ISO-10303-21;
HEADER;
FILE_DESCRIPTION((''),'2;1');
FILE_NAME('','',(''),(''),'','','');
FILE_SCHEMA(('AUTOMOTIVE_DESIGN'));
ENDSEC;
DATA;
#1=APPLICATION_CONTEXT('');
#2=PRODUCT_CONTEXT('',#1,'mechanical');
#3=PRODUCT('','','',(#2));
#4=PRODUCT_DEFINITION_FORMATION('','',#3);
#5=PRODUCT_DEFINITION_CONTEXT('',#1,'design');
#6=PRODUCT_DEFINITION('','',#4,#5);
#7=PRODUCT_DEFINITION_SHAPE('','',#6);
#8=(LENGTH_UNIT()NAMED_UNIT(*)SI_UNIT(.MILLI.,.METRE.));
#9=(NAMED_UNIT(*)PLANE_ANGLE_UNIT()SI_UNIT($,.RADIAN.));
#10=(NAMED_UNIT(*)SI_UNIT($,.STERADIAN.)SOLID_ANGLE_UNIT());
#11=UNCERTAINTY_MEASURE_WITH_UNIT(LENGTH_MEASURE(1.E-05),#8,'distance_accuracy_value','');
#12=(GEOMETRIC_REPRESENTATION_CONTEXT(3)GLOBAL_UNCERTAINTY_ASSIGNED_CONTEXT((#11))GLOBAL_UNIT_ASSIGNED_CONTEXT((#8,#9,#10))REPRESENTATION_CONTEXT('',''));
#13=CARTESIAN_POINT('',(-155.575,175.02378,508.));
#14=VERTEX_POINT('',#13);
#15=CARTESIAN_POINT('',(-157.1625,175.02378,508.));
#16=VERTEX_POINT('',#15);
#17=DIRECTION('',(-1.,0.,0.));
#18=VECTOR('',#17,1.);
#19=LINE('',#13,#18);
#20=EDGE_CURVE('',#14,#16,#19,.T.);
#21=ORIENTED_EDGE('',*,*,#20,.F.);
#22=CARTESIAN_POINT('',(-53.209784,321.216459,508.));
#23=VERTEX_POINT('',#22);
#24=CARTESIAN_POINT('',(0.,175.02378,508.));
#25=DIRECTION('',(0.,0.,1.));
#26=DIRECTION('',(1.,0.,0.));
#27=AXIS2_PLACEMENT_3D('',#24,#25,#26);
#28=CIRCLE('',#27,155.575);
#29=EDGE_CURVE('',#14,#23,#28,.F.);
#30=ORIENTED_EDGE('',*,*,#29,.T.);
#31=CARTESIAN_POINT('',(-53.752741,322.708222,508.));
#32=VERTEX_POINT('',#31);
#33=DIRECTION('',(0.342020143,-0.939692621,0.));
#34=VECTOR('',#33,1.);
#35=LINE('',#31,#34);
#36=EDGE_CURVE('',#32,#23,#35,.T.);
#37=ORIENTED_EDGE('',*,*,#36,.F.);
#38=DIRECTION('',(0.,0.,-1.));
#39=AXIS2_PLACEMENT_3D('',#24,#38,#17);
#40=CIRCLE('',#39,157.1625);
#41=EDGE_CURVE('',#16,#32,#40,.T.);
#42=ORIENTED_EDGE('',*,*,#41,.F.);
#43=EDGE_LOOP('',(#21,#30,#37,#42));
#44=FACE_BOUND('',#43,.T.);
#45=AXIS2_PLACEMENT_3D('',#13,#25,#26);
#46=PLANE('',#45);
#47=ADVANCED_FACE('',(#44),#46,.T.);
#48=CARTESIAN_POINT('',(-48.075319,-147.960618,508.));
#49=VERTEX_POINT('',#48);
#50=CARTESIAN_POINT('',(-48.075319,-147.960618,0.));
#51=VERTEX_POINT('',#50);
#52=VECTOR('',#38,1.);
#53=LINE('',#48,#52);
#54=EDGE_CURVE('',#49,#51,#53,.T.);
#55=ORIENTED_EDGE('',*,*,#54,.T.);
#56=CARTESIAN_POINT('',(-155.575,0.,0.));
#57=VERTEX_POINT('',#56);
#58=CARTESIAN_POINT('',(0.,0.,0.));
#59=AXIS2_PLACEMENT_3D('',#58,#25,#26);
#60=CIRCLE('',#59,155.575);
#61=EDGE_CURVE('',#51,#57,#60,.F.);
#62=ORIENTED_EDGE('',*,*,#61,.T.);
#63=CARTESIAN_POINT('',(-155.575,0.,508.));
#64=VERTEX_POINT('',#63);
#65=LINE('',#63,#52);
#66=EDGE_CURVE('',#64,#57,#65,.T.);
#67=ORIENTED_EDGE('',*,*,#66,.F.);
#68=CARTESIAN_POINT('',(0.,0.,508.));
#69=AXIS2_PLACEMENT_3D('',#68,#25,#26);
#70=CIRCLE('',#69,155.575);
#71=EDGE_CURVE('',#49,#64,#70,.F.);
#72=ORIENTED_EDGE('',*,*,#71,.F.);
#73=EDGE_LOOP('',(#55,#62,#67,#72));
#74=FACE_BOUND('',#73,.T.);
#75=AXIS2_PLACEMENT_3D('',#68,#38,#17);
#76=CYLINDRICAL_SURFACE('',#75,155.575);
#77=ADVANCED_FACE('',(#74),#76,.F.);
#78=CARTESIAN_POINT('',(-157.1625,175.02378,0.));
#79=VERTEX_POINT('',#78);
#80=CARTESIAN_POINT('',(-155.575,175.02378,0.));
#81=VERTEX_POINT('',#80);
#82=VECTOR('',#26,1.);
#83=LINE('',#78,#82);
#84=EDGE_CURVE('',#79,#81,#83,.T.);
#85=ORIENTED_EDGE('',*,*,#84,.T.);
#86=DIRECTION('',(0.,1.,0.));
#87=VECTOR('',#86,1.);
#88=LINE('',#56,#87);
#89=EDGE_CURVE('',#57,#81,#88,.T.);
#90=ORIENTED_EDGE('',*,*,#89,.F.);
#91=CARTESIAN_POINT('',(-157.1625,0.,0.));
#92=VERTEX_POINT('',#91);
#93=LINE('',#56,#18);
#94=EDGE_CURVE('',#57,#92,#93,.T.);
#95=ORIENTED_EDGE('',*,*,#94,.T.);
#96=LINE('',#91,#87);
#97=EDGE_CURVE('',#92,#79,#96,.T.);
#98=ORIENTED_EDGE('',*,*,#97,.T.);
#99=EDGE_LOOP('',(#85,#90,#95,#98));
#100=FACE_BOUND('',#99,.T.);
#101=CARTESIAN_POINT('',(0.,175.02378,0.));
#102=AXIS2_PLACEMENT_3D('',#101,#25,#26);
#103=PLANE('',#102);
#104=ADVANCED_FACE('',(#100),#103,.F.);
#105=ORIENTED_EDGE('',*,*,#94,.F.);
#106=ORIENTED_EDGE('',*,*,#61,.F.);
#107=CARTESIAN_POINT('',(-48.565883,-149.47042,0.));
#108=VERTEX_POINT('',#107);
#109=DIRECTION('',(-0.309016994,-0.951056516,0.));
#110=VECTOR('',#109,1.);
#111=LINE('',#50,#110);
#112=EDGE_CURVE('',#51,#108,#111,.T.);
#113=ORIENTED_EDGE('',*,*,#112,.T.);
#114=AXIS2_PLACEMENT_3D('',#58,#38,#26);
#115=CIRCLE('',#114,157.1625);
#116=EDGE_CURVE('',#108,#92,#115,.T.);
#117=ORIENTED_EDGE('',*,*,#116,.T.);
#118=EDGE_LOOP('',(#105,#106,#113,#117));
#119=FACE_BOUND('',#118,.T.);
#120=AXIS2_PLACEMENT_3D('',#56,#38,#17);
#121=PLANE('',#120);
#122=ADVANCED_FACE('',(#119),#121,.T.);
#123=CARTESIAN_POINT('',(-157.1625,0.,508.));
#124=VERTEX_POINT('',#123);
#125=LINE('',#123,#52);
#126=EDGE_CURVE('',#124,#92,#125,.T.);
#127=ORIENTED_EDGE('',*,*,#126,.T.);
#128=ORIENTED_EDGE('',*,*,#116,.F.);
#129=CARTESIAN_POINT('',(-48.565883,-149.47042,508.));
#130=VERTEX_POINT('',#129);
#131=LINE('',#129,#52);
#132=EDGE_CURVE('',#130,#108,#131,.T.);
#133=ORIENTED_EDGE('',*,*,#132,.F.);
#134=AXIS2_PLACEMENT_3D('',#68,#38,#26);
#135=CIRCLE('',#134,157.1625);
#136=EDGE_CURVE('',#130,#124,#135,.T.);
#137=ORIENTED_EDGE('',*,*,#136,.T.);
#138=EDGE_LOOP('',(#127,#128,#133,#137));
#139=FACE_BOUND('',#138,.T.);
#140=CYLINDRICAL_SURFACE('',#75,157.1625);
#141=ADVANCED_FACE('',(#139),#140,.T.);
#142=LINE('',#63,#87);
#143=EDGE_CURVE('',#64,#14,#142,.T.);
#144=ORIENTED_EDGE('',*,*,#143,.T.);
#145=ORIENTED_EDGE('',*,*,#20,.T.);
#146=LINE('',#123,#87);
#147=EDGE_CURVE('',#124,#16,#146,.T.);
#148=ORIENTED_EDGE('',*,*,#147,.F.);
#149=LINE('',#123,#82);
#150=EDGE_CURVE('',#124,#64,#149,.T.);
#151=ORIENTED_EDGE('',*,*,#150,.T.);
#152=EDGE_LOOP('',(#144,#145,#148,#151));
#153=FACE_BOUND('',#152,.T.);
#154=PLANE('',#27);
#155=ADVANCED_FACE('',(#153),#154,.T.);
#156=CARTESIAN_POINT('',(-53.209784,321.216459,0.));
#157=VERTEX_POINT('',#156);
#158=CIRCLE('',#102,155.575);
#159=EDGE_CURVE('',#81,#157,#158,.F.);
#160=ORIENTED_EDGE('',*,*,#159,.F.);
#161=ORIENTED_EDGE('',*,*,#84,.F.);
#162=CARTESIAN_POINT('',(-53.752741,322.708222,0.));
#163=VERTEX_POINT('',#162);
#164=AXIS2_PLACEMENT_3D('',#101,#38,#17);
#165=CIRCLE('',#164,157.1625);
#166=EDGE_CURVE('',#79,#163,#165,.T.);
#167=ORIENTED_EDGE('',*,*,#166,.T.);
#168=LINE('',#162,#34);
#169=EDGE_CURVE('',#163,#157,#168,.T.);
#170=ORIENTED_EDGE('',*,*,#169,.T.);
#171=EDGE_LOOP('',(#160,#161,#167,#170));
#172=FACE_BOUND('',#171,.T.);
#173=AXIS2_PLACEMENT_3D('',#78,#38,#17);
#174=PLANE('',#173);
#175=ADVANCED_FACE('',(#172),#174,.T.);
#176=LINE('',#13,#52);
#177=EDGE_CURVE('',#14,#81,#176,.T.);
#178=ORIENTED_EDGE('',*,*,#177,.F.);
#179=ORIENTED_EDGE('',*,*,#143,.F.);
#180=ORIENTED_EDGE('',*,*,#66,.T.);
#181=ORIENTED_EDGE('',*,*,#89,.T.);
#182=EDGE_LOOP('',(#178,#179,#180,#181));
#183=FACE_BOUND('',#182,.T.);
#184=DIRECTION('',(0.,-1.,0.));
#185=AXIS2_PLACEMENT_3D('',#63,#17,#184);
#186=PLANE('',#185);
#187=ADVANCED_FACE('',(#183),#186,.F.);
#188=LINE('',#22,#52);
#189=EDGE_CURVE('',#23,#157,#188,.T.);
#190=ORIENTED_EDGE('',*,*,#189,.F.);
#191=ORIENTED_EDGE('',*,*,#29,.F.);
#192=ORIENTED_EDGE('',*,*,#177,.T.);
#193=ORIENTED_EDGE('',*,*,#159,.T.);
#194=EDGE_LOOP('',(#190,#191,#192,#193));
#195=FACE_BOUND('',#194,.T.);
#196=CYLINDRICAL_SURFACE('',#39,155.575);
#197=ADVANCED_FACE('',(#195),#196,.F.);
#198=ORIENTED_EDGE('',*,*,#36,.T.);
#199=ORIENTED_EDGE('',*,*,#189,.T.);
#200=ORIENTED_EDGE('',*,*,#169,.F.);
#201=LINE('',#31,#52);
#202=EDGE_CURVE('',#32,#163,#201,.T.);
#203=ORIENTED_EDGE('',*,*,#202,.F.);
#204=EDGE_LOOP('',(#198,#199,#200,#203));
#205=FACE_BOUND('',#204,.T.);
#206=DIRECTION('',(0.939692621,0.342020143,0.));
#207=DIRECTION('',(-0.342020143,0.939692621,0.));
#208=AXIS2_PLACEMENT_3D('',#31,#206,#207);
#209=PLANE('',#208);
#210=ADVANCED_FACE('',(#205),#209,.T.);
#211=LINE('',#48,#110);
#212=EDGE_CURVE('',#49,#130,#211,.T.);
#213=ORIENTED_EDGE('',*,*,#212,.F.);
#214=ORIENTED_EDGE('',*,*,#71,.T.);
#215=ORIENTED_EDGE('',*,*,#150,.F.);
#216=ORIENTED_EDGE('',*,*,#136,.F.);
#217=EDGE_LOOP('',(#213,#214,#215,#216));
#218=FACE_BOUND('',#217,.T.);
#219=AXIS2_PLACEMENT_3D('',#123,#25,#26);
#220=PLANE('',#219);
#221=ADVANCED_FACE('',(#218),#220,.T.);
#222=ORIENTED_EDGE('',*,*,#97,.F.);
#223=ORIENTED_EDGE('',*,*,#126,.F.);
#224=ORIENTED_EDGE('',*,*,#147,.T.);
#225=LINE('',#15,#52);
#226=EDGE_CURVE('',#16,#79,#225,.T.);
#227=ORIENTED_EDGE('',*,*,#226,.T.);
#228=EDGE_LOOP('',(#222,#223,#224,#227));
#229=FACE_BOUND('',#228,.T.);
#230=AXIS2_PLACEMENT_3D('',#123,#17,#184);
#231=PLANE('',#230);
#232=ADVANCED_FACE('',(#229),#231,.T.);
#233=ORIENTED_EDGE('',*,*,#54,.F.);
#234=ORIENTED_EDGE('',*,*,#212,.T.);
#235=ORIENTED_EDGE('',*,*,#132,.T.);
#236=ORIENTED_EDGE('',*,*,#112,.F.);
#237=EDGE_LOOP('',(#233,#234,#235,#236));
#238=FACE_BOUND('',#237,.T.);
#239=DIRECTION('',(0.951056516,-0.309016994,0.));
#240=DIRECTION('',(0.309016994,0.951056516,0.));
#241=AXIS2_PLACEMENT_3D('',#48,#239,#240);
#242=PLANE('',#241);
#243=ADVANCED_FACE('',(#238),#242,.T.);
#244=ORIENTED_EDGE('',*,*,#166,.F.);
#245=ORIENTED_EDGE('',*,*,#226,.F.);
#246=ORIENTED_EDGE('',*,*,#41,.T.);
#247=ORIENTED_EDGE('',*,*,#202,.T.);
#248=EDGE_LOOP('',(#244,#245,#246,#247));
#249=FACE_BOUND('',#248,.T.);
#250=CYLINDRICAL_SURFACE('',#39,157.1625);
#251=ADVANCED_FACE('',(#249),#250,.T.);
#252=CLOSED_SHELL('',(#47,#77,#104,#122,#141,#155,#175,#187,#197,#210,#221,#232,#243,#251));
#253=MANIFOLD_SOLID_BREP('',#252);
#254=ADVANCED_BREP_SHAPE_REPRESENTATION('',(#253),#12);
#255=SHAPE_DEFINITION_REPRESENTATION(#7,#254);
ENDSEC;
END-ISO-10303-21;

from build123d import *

# Parameters (mm, degrees)
BASE_FLANGE1_DEPTH = 508


# Sheet-metal steps are written as plain solids
with BuildPart() as part:
    # Sketch1 → Base-Flange1 (new body)
    with BuildSketch(Plane.XY):
        with BuildLine():
            ThreePointArc((-48.565883378, -149.470419742), (-127.147133378, -92.377799713), (-157.1625, 0))
            Line((-157.1625, 0), (-157.1625, 175.02378))
            ThreePointArc((-157.1625, 175.02378), (-128.739983161, 265.168486678), (-53.752740775, 322.708221514))
            Line((-53.752740775, 322.708221514), (-53.209783798, 321.216459479))
            ThreePointArc((-53.209783798, 321.216459479), (-127.43957929, 264.257934085), (-155.575, 175.02378))
            Line((-155.575, 175.02378), (-155.575, 0))
            ThreePointArc((-155.575, 0), (-125.8628189, -91.444690625), (-48.0753189, -147.960617523))
            Line((-48.0753189, -147.960617523), (-48.565883378, -149.470419742))
        make_face()
    extrude(amount=BASE_FLANGE1_DEPTH)


solid = part.part
